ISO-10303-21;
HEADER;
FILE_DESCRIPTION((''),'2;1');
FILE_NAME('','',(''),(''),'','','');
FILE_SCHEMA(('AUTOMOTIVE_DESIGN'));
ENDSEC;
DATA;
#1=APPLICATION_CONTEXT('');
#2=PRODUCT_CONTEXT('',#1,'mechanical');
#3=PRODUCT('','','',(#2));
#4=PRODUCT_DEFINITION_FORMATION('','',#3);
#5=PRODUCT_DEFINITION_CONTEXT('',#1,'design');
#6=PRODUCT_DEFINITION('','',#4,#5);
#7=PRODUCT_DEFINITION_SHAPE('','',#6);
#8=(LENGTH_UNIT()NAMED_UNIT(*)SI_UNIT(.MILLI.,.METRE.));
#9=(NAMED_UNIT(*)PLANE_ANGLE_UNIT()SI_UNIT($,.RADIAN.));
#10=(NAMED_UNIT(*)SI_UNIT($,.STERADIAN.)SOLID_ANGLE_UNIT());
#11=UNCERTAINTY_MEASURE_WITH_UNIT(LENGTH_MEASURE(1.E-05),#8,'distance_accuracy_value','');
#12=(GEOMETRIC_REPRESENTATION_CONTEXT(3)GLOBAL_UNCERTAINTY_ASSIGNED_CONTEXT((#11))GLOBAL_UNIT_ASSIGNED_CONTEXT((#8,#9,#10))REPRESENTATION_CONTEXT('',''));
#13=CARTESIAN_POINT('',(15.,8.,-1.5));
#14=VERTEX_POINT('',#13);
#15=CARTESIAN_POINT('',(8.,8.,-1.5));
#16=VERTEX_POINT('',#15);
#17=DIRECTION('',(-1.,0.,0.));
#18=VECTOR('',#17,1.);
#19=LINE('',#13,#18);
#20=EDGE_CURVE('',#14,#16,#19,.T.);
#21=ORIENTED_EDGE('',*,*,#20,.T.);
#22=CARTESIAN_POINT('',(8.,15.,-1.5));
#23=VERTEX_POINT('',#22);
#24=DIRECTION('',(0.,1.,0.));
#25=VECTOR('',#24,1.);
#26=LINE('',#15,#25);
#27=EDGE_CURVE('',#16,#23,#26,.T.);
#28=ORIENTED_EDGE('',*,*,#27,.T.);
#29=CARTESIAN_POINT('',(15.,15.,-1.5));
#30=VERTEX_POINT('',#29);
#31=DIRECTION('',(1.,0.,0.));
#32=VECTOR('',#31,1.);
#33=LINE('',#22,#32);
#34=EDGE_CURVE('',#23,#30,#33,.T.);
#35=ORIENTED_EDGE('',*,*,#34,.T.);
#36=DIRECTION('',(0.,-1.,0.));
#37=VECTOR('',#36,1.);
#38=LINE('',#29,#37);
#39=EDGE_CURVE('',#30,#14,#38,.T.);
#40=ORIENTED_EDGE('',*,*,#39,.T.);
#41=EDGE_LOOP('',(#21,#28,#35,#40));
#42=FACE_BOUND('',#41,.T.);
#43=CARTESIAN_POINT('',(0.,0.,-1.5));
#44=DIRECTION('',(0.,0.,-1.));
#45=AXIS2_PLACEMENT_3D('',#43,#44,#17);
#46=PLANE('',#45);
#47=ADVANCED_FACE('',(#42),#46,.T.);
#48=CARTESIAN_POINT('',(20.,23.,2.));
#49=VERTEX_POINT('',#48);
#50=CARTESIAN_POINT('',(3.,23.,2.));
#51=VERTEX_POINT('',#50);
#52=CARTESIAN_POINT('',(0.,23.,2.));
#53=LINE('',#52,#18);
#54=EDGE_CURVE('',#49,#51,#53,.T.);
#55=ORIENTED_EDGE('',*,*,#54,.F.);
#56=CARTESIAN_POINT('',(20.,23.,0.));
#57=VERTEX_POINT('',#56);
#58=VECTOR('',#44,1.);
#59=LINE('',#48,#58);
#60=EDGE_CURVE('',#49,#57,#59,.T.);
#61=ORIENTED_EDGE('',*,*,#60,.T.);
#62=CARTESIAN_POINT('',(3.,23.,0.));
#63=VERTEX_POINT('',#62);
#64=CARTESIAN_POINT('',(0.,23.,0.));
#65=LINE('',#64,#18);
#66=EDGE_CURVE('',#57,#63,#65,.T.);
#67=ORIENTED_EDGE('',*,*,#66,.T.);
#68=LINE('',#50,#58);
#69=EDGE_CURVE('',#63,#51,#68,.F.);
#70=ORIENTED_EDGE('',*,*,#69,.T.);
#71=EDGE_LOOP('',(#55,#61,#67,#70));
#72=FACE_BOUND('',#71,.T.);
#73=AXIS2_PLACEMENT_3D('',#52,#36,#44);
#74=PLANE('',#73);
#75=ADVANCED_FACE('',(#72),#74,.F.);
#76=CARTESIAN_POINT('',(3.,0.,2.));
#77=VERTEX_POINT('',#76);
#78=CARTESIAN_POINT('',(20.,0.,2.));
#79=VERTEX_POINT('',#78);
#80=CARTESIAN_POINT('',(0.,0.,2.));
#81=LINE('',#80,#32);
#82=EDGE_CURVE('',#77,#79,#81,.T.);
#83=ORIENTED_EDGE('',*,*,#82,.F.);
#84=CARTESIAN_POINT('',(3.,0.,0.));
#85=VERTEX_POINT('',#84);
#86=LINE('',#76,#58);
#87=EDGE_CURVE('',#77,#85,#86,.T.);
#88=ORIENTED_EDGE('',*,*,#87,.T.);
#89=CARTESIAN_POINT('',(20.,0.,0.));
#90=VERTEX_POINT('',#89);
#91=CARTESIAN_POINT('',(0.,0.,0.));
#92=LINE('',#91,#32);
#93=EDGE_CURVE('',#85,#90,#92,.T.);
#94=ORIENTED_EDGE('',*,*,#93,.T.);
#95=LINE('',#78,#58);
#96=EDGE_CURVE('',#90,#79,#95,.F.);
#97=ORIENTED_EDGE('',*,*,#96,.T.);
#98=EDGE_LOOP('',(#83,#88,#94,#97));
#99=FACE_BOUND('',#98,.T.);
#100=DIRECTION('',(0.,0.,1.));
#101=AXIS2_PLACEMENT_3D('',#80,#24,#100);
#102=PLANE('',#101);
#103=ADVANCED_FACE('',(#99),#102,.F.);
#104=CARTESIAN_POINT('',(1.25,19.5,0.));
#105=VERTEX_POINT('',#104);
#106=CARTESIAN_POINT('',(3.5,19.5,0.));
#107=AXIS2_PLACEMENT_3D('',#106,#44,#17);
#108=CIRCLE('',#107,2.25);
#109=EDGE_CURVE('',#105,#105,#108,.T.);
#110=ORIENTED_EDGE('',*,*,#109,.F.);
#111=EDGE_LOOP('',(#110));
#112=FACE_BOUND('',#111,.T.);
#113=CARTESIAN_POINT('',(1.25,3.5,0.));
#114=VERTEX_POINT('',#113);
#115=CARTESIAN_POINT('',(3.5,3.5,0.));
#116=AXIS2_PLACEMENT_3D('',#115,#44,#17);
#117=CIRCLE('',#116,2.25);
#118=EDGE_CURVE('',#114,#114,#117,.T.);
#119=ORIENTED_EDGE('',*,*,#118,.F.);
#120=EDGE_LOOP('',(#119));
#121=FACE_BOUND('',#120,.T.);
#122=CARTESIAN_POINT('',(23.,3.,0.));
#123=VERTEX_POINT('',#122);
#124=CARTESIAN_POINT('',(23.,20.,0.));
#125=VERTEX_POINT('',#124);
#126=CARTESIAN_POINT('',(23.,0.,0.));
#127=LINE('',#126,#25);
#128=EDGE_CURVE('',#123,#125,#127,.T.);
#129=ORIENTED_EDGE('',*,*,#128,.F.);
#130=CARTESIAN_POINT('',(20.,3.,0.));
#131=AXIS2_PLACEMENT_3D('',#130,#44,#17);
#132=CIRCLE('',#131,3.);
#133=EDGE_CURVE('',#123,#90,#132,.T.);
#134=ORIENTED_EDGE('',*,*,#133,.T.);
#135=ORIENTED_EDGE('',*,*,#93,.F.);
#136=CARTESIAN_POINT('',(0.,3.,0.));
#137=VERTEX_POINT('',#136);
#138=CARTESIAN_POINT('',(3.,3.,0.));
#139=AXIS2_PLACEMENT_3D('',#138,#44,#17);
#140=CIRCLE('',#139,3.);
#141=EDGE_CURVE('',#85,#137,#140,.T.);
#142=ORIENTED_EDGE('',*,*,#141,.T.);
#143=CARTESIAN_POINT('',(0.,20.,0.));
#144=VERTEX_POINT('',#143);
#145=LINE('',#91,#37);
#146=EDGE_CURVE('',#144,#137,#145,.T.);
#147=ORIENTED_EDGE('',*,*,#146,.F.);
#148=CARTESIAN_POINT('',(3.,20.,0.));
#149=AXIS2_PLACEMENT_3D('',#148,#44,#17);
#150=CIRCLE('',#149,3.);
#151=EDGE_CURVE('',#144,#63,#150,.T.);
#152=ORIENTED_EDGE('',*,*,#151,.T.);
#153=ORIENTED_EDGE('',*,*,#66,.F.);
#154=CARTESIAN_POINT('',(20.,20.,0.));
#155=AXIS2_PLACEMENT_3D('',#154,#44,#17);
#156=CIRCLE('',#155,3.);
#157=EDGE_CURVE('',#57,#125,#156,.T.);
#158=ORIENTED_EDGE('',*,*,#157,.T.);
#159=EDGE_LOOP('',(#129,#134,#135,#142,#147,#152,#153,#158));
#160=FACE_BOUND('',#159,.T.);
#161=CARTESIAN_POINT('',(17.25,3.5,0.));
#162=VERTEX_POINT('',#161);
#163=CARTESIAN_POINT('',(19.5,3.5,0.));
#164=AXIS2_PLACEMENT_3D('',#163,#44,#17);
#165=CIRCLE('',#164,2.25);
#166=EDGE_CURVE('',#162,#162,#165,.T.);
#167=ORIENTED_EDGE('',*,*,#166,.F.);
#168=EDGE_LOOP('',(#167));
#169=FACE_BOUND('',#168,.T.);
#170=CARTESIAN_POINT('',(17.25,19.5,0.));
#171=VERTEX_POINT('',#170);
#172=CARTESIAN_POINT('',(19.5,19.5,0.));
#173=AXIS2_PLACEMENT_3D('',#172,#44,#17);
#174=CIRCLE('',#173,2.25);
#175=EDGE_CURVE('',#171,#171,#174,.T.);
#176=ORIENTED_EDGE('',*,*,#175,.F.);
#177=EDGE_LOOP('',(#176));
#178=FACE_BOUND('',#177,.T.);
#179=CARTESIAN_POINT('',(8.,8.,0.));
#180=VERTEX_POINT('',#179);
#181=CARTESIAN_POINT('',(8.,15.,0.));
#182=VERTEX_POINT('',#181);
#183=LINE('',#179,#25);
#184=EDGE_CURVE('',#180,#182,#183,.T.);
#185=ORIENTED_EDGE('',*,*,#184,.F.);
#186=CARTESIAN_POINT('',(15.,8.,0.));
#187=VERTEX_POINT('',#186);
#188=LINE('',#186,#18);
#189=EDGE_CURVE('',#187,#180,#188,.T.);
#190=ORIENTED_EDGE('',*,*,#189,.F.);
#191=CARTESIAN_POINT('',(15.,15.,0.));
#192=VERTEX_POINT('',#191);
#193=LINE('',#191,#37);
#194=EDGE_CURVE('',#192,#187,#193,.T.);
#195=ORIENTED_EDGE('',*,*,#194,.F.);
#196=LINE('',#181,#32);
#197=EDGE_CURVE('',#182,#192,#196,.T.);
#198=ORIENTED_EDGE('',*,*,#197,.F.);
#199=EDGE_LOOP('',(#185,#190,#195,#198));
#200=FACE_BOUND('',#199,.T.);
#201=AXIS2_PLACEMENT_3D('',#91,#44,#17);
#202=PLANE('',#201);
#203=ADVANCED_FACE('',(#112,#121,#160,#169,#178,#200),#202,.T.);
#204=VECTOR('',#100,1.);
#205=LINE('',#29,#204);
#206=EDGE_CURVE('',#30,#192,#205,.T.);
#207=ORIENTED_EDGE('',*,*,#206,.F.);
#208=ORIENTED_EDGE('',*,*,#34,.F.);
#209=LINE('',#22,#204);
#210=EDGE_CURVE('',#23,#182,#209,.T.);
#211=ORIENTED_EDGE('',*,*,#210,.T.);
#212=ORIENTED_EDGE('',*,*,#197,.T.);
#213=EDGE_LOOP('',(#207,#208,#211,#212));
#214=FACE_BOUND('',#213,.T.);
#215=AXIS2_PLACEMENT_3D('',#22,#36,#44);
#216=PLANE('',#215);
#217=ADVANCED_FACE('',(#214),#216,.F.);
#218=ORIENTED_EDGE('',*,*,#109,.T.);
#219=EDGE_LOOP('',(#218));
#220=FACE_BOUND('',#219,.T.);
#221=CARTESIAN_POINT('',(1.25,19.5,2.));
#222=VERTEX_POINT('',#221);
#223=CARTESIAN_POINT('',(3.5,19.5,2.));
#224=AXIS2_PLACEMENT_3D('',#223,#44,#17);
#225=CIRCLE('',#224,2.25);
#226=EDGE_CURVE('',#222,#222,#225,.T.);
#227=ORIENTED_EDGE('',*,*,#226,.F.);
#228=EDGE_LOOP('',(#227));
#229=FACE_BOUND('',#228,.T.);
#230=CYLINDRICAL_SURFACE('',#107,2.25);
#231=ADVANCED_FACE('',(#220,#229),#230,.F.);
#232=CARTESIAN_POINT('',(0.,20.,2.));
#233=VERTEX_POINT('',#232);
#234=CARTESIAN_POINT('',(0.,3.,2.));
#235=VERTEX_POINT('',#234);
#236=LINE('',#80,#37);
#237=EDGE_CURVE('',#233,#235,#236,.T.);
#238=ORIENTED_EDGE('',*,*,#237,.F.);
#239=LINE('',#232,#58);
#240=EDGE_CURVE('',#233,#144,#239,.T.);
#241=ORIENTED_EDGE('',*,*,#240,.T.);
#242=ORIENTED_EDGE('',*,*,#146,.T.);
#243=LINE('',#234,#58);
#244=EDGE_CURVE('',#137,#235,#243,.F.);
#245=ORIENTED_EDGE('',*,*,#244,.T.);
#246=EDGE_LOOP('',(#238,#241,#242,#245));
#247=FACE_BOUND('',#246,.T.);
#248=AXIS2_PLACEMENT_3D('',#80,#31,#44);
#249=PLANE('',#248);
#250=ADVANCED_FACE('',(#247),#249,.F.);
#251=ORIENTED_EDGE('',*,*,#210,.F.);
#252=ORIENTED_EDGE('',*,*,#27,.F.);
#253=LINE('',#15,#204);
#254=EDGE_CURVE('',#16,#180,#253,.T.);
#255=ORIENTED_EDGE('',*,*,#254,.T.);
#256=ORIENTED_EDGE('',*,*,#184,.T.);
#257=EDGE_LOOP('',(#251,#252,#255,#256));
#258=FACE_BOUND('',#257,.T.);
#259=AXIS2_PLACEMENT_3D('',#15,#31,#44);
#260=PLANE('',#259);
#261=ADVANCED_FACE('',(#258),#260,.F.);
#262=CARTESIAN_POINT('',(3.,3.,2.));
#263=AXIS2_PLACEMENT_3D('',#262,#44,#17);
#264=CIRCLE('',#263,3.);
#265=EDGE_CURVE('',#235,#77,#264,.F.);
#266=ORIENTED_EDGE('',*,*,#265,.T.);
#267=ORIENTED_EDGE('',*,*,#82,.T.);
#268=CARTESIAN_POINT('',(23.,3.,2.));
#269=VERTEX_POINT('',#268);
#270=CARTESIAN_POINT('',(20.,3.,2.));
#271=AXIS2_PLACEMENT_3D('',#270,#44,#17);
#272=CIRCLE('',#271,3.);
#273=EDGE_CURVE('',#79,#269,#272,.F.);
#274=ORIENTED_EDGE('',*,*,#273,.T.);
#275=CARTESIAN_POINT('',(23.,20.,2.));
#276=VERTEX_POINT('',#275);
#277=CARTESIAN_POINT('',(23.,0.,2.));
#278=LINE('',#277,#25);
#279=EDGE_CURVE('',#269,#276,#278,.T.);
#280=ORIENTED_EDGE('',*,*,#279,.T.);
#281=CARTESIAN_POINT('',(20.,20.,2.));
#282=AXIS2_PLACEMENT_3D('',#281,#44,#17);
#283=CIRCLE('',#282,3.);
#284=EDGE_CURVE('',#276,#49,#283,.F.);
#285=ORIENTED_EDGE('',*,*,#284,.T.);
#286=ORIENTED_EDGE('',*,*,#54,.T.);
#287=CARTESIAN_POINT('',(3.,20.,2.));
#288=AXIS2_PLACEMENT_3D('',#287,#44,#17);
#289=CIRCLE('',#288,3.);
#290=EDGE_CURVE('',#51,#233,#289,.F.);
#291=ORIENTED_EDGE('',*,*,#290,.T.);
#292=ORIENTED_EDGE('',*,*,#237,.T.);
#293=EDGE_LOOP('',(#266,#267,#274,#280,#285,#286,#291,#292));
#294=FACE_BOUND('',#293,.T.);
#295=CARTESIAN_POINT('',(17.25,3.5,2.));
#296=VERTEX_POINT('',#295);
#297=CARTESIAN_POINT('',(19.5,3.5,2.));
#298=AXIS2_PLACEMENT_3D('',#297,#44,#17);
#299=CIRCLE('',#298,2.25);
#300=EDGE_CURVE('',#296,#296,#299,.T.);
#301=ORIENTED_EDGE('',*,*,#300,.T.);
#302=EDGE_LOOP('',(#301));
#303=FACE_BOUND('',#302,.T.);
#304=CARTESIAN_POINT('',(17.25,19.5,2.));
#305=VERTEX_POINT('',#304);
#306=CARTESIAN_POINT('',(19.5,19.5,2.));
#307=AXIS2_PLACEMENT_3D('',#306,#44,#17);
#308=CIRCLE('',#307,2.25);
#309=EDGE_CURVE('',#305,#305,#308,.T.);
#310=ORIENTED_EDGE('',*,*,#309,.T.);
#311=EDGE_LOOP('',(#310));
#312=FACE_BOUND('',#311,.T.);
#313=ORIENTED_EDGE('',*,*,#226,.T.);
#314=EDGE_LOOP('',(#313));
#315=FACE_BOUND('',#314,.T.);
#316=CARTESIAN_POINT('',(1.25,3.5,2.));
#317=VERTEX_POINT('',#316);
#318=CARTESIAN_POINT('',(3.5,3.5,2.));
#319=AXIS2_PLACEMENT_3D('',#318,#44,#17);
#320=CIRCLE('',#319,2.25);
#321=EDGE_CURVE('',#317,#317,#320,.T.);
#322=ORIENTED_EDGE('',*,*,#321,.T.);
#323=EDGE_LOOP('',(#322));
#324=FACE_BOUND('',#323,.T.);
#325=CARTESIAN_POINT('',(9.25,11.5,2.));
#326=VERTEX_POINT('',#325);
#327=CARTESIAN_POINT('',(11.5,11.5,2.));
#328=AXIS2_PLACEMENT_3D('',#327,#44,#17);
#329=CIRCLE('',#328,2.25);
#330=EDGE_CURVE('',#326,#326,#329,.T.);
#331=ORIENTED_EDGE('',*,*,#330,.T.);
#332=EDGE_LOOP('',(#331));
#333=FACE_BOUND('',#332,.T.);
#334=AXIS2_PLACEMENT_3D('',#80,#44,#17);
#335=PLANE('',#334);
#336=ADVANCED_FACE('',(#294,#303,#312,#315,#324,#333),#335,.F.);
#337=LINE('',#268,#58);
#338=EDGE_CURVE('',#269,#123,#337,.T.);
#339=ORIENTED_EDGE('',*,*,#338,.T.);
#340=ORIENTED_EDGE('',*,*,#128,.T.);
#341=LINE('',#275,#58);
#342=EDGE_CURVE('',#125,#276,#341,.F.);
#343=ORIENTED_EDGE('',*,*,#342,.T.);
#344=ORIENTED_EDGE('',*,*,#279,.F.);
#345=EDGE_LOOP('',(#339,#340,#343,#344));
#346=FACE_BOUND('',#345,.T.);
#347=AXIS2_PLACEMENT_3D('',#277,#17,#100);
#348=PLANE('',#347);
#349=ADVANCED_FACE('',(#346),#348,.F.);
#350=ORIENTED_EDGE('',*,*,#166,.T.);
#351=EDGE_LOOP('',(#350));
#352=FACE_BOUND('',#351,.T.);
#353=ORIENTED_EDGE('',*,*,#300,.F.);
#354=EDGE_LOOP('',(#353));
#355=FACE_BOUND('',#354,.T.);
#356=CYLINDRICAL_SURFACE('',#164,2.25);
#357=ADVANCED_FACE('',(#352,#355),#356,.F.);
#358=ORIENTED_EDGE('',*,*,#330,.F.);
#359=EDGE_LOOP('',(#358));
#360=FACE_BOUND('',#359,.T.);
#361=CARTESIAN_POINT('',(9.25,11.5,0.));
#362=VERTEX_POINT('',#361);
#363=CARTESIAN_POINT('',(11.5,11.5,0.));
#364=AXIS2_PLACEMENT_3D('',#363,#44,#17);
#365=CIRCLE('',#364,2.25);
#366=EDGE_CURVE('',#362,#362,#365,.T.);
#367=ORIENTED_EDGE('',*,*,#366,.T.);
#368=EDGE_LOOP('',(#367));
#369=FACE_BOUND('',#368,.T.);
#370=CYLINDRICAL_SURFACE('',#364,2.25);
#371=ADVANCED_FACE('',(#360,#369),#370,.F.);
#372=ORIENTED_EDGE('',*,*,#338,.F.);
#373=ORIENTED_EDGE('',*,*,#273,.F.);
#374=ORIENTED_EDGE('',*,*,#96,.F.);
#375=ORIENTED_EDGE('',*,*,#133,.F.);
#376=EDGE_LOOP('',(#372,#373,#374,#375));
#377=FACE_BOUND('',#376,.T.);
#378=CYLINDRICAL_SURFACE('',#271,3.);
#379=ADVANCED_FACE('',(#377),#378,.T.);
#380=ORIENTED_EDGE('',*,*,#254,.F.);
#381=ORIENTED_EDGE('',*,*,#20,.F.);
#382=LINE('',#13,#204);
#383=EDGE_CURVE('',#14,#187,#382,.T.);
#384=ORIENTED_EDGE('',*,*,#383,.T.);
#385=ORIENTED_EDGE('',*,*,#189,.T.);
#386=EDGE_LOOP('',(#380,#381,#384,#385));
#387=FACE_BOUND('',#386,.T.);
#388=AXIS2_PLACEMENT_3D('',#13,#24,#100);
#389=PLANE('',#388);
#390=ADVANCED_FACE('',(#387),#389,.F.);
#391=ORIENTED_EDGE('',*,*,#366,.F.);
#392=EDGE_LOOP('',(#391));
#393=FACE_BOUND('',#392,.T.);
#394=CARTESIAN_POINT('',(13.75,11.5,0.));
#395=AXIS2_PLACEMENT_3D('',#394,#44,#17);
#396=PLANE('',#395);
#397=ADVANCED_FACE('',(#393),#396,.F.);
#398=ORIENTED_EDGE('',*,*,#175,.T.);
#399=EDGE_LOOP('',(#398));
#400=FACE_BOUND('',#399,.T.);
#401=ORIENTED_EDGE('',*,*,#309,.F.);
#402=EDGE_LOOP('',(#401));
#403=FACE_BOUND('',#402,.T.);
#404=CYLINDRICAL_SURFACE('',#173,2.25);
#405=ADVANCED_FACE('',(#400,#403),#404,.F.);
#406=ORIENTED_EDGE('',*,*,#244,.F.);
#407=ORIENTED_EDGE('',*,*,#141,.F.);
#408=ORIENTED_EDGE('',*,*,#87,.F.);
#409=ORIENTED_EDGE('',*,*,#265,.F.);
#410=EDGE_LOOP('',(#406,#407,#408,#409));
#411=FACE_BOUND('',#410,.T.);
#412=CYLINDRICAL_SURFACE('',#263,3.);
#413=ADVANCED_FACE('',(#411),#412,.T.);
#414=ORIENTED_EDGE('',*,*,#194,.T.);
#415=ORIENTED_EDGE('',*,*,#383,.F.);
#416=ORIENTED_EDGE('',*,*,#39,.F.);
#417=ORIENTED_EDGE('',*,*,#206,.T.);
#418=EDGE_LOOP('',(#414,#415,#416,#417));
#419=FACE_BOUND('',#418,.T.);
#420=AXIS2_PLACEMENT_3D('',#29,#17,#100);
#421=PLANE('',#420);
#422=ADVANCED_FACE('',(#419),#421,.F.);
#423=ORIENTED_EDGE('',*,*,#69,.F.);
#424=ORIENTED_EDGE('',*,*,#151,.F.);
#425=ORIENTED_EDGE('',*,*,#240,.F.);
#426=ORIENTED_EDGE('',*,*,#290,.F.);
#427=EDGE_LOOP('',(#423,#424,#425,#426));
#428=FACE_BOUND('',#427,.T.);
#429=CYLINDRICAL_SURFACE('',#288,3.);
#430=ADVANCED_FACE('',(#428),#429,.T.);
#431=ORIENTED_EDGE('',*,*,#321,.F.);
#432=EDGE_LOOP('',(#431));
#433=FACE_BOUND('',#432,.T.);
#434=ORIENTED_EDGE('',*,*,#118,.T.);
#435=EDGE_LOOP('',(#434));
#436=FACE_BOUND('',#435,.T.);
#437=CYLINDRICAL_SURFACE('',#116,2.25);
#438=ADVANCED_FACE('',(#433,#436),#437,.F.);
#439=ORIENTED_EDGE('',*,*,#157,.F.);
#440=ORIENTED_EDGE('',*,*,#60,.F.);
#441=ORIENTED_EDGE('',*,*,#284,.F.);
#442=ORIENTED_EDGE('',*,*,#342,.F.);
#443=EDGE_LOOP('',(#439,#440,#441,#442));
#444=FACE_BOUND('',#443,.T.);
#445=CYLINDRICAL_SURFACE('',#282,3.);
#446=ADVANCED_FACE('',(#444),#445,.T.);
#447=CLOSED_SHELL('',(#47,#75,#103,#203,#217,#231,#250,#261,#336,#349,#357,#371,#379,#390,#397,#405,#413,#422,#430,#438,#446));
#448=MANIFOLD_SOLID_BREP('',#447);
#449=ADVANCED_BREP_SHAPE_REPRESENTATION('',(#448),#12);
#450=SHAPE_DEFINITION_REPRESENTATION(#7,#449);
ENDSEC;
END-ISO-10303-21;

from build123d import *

# Parameters (mm, degrees)
SKETCH_1_W                 = 23
SKETCH_1_H                 = 23
EXTRUDE_1_DEPTH            = 2
SKETCH_2_W                 = 7
SKETCH_2_H                 = 7
EXTRUDE_2_DEPTH            = 1.5
FILLET_1_R                 = 3
HOLE_WIZARD_M4_1_OUTLINE_R = 2.25
HOLE_WIZARD_M4_1_DEPTH     = 2


# Read off the part's stored shape, not the designer's step: M4 间隙孔1
with BuildPart() as part:
    # 草图1 → 凸台-拉伸1 (new body)
    with BuildSketch(Plane.XY):
        with Locations((11.5, 11.5)):
            Rectangle(SKETCH_1_W, SKETCH_1_H)
    extrude(amount=EXTRUDE_1_DEPTH)

    # 草图2 → 凸台-拉伸2 (add)
    with BuildSketch(Plane(origin=(0, 0, 0), x_dir=(-1, 0, 0), z_dir=(0, 0, -1))):
        with Locations((-11.5, 11.5)):
            Rectangle(SKETCH_2_W, SKETCH_2_H)
    extrude(amount=EXTRUDE_2_DEPTH)

    # 圆角1
    fillet_1_edges = [part.edges().sort_by_distance(p)[0] for p in [
        (0, 23, 1),
        (23, 23, 1),
        (23, 0, 1),
        (0, 0, 1),
    ]]
    fillet(fillet_1_edges, radius=FILLET_1_R)

    # M4 间隙孔1 outline → M4 间隙孔1 (cut)
    with BuildSketch(Plane.XY):
        with Locations((3.5, 3.5)):
            Circle(HOLE_WIZARD_M4_1_OUTLINE_R)
        with Locations((19.5, 19.5)):
            Circle(HOLE_WIZARD_M4_1_OUTLINE_R)
        with Locations((19.5, 3.5)):
            Circle(HOLE_WIZARD_M4_1_OUTLINE_R)
        with Locations((3.5, 19.5)):
            Circle(HOLE_WIZARD_M4_1_OUTLINE_R)
        with Locations((11.5, 11.5)):
            Circle(HOLE_WIZARD_M4_1_OUTLINE_R)
    extrude(amount=HOLE_WIZARD_M4_1_DEPTH, mode=Mode.SUBTRACT)


solid = part.part
